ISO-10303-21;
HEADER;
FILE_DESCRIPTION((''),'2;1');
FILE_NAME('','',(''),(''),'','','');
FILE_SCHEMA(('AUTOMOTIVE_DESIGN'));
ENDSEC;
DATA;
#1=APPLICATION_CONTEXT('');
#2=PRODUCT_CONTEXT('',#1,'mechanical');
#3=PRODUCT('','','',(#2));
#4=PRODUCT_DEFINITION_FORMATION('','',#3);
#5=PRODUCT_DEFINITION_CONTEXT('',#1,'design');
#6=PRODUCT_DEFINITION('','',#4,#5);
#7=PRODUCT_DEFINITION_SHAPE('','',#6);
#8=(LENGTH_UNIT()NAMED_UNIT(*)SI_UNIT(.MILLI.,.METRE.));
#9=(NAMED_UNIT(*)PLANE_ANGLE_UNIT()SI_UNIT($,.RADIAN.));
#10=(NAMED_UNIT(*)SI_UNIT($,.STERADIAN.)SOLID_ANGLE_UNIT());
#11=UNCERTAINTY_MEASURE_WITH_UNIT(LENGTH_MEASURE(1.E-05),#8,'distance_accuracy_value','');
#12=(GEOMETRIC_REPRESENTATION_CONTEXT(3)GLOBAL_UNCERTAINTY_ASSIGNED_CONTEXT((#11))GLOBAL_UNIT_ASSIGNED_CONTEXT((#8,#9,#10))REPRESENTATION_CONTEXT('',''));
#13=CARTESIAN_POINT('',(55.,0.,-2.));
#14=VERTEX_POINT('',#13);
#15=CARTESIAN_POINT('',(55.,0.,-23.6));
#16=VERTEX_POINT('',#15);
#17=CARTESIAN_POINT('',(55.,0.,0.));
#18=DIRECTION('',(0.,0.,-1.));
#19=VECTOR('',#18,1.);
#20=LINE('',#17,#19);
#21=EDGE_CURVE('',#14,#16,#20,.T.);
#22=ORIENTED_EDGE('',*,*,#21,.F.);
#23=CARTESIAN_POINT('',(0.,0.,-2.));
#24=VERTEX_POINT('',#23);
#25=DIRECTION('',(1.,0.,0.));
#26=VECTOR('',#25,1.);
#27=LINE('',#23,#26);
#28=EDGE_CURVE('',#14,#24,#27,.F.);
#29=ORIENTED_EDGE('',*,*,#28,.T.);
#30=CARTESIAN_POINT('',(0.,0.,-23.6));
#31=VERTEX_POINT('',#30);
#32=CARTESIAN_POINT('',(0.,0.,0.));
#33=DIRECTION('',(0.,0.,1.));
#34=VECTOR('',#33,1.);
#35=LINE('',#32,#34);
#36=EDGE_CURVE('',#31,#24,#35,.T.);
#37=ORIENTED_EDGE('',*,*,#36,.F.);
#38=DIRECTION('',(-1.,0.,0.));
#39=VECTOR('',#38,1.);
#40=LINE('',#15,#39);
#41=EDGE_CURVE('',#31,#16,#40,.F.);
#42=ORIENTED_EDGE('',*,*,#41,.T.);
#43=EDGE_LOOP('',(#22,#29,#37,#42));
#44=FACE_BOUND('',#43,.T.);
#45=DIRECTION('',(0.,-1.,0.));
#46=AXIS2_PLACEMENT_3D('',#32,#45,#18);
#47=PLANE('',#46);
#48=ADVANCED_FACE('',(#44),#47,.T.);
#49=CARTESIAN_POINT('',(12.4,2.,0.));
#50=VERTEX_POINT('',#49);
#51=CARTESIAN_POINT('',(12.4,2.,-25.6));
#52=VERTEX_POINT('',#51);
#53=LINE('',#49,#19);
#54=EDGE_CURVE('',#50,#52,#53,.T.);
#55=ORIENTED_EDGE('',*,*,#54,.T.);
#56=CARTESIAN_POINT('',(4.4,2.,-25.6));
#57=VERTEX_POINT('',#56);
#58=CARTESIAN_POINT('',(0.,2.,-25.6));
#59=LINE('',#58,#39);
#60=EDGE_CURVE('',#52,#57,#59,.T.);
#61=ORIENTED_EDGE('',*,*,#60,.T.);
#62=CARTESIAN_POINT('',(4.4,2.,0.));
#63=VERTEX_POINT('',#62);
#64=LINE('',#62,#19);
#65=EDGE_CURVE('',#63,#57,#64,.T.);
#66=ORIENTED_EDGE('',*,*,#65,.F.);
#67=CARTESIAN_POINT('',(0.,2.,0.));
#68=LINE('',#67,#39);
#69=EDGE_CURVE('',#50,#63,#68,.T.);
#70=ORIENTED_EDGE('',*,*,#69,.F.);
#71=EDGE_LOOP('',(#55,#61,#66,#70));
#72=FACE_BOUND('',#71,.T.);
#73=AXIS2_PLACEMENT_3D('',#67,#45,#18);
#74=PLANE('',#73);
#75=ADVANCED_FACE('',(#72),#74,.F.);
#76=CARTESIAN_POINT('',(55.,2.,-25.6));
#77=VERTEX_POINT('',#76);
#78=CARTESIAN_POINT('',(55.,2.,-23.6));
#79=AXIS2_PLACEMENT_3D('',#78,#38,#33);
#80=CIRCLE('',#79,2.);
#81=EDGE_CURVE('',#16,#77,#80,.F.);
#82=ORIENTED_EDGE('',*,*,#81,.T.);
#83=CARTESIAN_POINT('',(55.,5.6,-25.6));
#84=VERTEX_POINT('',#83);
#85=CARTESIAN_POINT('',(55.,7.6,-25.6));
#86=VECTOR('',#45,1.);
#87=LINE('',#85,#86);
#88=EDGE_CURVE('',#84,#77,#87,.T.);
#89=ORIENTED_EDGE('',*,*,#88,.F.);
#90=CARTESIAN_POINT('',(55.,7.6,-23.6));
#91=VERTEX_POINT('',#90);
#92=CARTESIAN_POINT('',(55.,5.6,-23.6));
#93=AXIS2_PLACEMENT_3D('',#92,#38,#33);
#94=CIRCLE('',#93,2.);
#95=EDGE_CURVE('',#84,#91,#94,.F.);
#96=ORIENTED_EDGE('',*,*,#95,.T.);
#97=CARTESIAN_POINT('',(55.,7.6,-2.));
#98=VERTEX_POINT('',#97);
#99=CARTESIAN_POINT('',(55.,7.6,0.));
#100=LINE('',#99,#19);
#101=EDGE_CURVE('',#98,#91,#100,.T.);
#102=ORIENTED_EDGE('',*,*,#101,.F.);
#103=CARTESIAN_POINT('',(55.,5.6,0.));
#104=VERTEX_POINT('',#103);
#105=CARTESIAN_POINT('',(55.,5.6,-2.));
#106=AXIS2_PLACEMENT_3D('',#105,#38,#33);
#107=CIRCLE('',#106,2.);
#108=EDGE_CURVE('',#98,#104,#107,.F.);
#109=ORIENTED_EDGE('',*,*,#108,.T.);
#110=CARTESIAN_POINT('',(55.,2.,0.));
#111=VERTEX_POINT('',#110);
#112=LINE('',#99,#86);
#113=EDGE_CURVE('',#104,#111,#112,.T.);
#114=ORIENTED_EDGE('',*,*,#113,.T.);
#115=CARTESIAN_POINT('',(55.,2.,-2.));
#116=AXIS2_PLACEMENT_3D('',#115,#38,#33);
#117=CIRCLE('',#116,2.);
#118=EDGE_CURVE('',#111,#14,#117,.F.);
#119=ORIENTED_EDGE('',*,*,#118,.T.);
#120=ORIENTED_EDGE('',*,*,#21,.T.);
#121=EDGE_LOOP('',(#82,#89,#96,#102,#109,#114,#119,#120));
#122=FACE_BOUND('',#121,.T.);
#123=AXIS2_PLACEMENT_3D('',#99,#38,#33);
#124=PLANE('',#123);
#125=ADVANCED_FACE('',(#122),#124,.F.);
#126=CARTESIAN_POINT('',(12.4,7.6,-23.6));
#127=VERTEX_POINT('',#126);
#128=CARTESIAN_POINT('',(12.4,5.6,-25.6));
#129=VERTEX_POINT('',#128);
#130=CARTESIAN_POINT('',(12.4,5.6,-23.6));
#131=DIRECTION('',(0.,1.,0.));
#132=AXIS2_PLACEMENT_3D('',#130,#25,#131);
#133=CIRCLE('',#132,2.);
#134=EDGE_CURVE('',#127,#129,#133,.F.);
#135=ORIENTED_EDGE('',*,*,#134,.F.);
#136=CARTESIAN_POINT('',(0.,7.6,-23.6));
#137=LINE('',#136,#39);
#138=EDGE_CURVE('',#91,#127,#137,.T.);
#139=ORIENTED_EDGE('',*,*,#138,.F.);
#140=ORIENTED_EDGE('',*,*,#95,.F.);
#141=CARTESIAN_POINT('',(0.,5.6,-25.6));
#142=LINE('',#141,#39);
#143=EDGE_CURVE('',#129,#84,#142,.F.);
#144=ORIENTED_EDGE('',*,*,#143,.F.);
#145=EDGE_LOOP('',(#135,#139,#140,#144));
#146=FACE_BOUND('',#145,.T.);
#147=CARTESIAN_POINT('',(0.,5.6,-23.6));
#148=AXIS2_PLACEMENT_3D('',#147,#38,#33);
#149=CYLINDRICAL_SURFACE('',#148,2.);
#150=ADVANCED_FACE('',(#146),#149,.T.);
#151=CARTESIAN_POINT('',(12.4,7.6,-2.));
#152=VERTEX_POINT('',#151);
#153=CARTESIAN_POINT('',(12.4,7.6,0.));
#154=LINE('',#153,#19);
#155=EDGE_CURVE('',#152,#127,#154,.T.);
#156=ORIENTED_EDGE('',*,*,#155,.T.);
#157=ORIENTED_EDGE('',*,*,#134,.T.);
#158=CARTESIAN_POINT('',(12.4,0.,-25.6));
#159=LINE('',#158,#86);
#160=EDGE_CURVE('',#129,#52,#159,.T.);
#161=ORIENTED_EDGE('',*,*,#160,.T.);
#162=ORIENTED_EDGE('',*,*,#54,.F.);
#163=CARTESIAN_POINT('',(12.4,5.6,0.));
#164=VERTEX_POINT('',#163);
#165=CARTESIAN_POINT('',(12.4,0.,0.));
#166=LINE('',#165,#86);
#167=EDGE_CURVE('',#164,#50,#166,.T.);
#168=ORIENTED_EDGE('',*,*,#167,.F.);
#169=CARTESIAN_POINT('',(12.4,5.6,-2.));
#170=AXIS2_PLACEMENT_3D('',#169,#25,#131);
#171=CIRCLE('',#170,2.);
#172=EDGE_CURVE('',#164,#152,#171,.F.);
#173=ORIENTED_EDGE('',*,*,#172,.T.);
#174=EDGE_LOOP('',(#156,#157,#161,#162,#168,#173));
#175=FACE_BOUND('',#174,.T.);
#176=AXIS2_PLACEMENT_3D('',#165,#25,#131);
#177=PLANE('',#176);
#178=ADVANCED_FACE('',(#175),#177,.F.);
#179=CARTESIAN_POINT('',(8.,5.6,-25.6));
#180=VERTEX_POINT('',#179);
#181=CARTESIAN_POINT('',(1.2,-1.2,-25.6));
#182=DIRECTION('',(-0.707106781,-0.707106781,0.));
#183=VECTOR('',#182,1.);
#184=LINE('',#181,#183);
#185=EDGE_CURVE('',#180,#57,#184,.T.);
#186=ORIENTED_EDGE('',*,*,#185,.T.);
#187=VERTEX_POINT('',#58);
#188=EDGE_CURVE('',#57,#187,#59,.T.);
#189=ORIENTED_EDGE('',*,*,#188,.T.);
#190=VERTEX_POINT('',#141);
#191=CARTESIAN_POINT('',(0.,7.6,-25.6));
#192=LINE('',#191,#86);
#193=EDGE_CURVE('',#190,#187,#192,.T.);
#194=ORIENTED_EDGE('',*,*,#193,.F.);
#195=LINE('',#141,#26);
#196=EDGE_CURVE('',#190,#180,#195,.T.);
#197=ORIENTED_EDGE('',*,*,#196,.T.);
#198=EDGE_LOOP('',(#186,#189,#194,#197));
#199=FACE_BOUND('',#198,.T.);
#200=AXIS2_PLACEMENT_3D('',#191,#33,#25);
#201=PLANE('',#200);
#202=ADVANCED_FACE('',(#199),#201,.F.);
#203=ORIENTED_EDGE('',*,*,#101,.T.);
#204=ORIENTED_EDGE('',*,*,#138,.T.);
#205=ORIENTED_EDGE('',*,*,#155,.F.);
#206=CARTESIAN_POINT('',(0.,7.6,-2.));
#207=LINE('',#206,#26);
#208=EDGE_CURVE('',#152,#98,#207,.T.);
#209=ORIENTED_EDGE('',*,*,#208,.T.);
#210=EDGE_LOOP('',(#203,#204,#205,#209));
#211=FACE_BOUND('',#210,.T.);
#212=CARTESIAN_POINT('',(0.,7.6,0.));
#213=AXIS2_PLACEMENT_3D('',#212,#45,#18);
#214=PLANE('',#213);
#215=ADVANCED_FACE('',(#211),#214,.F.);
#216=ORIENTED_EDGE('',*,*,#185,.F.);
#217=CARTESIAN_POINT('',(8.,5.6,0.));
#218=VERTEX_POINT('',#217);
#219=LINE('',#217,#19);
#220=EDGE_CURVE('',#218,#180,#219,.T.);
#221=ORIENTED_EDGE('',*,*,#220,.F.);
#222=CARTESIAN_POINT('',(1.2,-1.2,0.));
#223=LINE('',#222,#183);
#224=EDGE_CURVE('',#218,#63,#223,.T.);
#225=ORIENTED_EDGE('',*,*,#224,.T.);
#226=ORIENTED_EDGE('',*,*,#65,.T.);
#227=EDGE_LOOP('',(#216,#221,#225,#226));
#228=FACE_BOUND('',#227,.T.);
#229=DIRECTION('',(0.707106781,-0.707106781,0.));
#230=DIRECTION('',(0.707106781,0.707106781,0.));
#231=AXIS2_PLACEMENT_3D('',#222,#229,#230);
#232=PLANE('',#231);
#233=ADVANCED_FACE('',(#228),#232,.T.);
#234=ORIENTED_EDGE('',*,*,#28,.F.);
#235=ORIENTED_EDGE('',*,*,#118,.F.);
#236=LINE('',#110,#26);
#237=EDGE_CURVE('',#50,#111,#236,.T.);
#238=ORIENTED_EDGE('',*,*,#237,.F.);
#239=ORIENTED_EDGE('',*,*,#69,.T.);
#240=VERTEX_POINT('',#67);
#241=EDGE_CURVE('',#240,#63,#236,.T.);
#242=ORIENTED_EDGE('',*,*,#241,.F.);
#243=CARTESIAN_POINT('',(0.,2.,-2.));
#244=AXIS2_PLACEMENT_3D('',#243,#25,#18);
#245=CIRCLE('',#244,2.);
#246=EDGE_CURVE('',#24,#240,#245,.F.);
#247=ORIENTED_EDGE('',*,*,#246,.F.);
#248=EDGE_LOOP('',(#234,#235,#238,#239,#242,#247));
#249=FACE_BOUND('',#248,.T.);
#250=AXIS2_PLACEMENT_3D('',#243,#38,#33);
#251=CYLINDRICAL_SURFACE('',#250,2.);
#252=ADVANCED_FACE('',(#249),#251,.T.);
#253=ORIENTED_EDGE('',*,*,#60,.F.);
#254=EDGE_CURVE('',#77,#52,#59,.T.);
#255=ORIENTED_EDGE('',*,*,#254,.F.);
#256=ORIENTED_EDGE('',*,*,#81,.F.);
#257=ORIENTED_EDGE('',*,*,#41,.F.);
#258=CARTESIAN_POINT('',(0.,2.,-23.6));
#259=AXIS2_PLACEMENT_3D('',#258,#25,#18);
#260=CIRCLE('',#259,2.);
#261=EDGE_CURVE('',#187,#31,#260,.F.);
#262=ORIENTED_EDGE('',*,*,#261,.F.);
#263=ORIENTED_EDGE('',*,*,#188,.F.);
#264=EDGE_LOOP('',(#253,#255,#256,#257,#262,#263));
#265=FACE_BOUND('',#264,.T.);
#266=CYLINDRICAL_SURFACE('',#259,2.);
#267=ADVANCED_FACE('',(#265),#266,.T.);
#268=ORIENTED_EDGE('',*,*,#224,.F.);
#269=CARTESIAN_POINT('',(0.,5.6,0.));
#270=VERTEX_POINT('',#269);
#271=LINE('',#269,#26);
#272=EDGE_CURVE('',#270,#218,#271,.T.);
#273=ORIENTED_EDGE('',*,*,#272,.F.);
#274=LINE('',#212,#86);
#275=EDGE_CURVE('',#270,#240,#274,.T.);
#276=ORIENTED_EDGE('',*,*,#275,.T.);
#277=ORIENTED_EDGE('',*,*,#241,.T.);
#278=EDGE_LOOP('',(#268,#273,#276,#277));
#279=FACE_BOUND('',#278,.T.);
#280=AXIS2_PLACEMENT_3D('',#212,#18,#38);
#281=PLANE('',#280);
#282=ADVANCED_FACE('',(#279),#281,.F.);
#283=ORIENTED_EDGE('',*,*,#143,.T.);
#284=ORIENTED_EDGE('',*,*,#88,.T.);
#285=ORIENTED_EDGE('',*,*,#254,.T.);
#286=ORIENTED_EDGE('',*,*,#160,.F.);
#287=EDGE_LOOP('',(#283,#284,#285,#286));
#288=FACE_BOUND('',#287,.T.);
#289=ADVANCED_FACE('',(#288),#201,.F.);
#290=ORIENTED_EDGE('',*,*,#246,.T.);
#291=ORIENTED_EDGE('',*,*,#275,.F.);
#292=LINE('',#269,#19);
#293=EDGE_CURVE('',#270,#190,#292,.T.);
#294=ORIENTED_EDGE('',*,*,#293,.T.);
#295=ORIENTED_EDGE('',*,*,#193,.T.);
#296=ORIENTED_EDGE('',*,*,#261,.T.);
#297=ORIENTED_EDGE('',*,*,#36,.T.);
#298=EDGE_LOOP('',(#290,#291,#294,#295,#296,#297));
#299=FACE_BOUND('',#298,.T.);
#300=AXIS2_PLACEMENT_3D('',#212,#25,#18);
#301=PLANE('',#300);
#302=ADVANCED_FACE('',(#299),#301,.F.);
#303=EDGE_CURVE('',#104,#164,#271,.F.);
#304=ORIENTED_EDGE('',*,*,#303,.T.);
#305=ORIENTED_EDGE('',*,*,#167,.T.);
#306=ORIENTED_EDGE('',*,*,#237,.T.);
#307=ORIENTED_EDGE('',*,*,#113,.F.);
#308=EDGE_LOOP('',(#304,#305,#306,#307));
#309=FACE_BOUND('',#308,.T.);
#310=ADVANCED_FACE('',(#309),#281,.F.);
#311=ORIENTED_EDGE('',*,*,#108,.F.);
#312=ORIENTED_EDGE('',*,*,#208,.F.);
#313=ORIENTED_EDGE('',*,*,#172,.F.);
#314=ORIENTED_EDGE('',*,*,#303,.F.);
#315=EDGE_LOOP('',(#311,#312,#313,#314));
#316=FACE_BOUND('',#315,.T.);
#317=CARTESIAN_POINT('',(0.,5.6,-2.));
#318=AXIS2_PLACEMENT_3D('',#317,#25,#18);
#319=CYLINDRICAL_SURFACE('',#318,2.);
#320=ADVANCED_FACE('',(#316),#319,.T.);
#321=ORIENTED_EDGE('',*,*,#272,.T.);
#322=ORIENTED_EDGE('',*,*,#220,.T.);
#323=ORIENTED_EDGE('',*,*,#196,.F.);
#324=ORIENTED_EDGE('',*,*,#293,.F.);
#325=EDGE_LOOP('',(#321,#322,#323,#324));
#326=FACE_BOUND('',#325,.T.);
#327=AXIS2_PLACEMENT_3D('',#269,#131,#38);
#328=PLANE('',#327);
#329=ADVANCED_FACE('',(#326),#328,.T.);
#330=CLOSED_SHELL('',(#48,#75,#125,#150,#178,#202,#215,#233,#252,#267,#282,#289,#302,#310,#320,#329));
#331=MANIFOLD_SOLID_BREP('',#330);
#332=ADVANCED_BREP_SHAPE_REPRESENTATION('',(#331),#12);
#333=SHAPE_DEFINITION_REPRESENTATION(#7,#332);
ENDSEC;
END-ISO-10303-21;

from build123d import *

# Parameters (mm, degrees)
SKETCH1_W           = 55
SKETCH1_H           = 25.6
BOSS_EXTRUDE1_DEPTH = 7.6
CUT_EXTRUDE1_DEPTH  = 25.6
FILLET1_R           = 2


with BuildPart() as part:
    # Sketch1 → Boss-Extrude1 (new body)
    with BuildSketch(Plane(origin=(0, 0, 0), x_dir=(1, 0, 0), z_dir=(0, 1, 0))):
        with Locations((27.5, 12.8)):
            Rectangle(SKETCH1_W, SKETCH1_H)
    extrude(amount=BOSS_EXTRUDE1_DEPTH)

    # Sketch2 → Cut-Extrude1 (cut)
    with BuildSketch(Plane(origin=(0, 0, -25.6), x_dir=(-1, 0, 0), z_dir=(0, 0, -1))):
        Polygon((-8, 5.6), (-4.4, 2), (-12.4, 2), (-12.4, 7.6), (0, 7.6), (0, 5.6), align=None)
    extrude(amount=-CUT_EXTRUDE1_DEPTH, mode=Mode.SUBTRACT)

    # Fillet1
    fillet1_edges = [part.edges().sort_by_distance(p)[0] for p in [
        (33.7, 7.6, -25.6),
        (33.7, 7.6, 0),
        (27.5, 0, -25.6),
        (27.5, 0, 0),
    ]]
    fillet(fillet1_edges, radius=FILLET1_R - 0.0001)  # a hair under: the kernel refuses the full size


solid = part.part
